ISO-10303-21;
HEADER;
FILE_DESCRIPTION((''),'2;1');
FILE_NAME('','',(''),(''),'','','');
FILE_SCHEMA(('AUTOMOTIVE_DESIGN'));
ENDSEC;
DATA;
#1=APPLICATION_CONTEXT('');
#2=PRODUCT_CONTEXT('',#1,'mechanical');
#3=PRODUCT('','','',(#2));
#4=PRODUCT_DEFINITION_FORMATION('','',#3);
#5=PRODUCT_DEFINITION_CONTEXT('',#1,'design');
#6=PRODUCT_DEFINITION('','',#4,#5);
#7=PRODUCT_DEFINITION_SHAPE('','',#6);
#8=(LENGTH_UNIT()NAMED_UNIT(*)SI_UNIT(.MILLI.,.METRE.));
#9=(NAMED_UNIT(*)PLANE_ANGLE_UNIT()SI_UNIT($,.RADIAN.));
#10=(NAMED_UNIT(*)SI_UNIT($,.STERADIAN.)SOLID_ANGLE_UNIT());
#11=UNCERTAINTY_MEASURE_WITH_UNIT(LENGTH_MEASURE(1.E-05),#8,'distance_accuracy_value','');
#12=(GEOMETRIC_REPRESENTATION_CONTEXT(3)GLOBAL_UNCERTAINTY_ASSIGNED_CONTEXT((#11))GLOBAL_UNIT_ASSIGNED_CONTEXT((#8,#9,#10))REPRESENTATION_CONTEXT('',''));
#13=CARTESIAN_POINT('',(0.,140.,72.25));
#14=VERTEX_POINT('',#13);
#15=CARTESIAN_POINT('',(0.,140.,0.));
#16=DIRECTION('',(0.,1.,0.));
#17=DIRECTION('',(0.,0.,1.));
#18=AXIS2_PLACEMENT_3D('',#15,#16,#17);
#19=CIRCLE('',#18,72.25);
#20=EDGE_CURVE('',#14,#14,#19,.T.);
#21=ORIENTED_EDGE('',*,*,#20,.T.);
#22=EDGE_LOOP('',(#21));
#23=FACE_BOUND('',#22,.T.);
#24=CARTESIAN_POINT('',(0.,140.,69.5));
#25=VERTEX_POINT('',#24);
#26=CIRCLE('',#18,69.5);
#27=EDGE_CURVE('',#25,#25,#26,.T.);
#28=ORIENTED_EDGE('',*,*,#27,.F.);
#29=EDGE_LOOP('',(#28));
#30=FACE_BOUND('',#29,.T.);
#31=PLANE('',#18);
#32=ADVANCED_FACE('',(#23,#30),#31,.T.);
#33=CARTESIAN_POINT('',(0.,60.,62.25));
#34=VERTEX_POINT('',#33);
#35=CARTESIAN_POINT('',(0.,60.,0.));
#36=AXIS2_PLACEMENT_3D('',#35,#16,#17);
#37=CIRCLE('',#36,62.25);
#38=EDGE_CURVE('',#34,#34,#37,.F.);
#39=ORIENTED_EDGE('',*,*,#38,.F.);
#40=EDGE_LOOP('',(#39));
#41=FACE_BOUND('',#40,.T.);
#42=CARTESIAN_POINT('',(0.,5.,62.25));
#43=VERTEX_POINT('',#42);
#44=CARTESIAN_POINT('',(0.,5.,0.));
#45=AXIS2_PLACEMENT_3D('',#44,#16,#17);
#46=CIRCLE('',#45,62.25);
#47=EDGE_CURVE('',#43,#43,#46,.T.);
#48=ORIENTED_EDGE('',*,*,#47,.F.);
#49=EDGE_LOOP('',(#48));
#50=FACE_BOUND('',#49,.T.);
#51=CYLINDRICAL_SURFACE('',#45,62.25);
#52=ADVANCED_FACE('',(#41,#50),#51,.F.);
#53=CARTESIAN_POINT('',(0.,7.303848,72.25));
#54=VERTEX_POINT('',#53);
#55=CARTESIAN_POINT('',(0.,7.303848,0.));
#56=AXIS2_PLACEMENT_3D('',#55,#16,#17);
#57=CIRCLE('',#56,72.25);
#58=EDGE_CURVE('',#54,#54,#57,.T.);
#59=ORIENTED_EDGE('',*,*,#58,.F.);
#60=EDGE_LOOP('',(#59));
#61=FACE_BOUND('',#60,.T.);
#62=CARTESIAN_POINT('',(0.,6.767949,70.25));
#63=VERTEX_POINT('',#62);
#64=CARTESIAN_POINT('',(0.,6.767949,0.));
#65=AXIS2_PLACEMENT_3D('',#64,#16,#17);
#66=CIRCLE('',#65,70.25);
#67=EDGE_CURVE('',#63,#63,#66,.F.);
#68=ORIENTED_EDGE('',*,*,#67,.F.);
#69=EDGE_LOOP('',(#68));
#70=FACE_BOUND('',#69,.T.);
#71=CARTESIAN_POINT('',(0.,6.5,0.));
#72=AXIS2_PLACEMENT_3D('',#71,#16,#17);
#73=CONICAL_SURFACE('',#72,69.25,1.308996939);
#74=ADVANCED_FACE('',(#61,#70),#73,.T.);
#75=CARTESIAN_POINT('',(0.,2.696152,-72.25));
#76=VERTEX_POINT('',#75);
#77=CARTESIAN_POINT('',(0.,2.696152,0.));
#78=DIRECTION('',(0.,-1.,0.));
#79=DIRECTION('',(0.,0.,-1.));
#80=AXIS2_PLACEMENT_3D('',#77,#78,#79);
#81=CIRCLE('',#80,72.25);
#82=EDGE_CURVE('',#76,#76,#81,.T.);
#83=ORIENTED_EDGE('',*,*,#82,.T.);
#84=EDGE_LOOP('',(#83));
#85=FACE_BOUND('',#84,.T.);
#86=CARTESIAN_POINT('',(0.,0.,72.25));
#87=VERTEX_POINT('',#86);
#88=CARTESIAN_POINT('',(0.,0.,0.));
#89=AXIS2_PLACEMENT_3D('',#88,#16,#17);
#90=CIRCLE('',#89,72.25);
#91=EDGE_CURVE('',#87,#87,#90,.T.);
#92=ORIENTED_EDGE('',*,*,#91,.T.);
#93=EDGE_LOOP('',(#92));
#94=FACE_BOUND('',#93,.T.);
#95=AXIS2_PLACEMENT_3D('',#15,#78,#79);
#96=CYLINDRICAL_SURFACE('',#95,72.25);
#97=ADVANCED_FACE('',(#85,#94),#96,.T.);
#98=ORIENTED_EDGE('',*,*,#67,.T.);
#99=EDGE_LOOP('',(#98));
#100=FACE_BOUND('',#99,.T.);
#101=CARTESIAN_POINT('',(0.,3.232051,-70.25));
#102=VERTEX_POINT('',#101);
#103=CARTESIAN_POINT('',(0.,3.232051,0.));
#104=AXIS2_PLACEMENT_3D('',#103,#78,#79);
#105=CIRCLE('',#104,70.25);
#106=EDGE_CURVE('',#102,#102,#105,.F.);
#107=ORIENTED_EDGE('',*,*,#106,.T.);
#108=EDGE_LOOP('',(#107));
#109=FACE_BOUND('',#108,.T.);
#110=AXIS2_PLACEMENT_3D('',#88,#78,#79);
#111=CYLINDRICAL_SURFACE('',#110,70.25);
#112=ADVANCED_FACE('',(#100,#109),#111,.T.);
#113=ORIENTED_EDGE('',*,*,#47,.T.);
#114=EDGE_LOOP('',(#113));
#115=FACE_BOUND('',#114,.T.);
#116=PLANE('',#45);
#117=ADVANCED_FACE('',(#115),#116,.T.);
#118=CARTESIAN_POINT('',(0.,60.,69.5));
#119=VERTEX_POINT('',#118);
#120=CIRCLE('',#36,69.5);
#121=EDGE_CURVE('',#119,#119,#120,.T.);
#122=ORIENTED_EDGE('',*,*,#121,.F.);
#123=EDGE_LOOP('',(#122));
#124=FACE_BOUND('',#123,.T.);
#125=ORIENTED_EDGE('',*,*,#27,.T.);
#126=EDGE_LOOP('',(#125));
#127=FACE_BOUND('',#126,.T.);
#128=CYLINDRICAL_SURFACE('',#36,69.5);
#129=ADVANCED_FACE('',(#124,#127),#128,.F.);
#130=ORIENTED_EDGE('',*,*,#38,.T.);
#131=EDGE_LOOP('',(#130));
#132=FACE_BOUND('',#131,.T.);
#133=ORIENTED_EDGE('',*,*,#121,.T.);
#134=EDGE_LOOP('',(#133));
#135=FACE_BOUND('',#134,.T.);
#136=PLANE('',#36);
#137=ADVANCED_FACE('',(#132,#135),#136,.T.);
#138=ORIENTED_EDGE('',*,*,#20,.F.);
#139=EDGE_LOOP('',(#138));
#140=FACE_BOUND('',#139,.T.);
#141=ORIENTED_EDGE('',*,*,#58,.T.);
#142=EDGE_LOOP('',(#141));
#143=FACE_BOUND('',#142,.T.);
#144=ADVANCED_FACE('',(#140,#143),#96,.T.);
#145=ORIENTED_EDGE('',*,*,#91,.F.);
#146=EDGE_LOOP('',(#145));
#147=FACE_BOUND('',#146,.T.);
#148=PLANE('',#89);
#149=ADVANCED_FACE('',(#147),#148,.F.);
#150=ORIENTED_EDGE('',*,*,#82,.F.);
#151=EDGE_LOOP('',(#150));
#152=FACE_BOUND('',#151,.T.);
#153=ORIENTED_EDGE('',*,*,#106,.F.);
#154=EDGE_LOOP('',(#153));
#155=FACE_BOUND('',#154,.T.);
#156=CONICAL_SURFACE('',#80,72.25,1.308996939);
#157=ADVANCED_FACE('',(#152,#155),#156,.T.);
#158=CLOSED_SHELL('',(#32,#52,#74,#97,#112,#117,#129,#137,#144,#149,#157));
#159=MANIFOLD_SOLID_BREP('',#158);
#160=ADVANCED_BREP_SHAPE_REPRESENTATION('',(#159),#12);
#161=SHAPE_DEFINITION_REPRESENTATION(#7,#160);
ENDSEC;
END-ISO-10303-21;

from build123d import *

# Parameters (mm, degrees)
SKETCH_1_R          = 72.25
SKETCH_1_R_2        = 71
EXTRUDE_1_DEPTH     = 140
SKETCH_2_W          = 2
SKETCH_2_H          = 3
CHAMFER_3_SIZE      = 0.803847577
CHAMFER_3_SIZE_2    = 3
CHAMFER_5_SIZE      = 3
CHAMFER_5_SIZE_2    = 0.803847577
SKETCH_3_R          = 62.25
CUT_EXTRUDE_7_DEPTH = 135
CUT_EXTRUDE_START   = 135
SKETCH_8_R          = 69.5
CUT_EXTRUDE_9_DEPTH = 80


with BuildPart() as part:
    # 草圖1 → 填料-伸長1 (new body)
    # profile 1 of 2: a face of its own
    with BuildSketch(Plane(origin=(0, 0, 0), x_dir=(1, 0, 0), z_dir=(0, 1, 0))):
        with Locations(Location((0, 0, 0), (0, 0, 270))):
            Circle(SKETCH_1_R)
        Circle(SKETCH_1_R_2, mode=Mode.SUBTRACT)
    # profile 2 of 2: a face of its own
    with BuildSketch(Plane(origin=(0, 0, 0), x_dir=(1, 0, 0), z_dir=(0, 1, 0))):
        Circle(SKETCH_1_R_2)
    extrude(amount=EXTRUDE_1_DEPTH)

    # 草圖2 → 除料-旋轉1 (revolve, cut)
    with BuildSketch(Plane.XY, mode=Mode.PRIVATE) as cut_revolve_1_sk:
        with Locations((71.25, 5)):
            Rectangle(SKETCH_2_W, SKETCH_2_H)
    revolve(cut_revolve_1_sk.sketch.rotate(Axis((0, 0, 0), (0, 1, 0)), 90), axis=Axis((0, 0, 0), (0, 1, 0)), mode=Mode.SUBTRACT)

    # 導角3
    # the kernel refuses this chamfer: 3, 0.803847577 mm, written as the material it takes off along each edge
    with BuildSketch(Plane(origin=(0, 3.5, 0), x_dir=(0, 0, 1), z_dir=(1, 0, 0))) as chamfer_3_piece_1_section:
        Polygon((72.25, CHAMFER_3_SIZE), (72.25 - CHAMFER_3_SIZE_2, 0), (72.25, 0), align=None)
    chamfer_3_piece_1 = revolve(axis=Axis((0, 3.5, 0), (0, -1, 0)), mode=Mode.PRIVATE)
    chamfer_3_piece_1 = chamfer_3_piece_1 - Plane(origin=(0, 3.028349799, 0), x_dir=(0, 0, -1), z_dir=(0, 1, 0)) * Cylinder(70.25, 289, mode=Mode.PRIVATE)
    add(chamfer_3_piece_1, mode=Mode.SUBTRACT)

    # 導角5
    # the kernel refuses this chamfer: 3, 0.803847577 mm, written as the material it takes off along each edge
    with BuildSketch(Plane(origin=(0, 6.5, 0), x_dir=(0, 0, 1), z_dir=(1, 0, 0))) as chamfer_5_piece_1_section:
        Polygon((72.25 - CHAMFER_5_SIZE, 0), (72.25, -CHAMFER_5_SIZE_2), (72.25, 0), align=None)
    chamfer_5_piece_1 = revolve(axis=Axis((0, 6.5, 0), (0, -1, 0)), mode=Mode.PRIVATE)
    chamfer_5_piece_1 = chamfer_5_piece_1 - Plane(origin=(0, 6.971650201, 0), x_dir=(0, 0, -1), z_dir=(0, 1, 0)) * Cylinder(70.25, 289, mode=Mode.PRIVATE)
    add(chamfer_5_piece_1, mode=Mode.SUBTRACT)

    # 草圖3 → 除料-伸長7 (cut)
    with BuildSketch(Plane(origin=(0, 140, 0), x_dir=(1, 0, 0), z_dir=(0, 1, 0))):
        with Locations(Location((0, 0, 0), (0, 0, 270))):
            Circle(SKETCH_3_R)
    extrude(amount=-CUT_EXTRUDE_7_DEPTH, mode=Mode.SUBTRACT)

    # 草圖8 → 除料-伸長9 (cut)
    with BuildSketch(Plane(origin=(0, 5, 0), x_dir=(1, 0, 0), z_dir=(0, 1, 0)).offset(CUT_EXTRUDE_START)):
        with Locations(Location((0, 0, 0), (0, 0, 270))):
            Circle(SKETCH_8_R)
    extrude(amount=-CUT_EXTRUDE_9_DEPTH, mode=Mode.SUBTRACT)


solid = part.part
